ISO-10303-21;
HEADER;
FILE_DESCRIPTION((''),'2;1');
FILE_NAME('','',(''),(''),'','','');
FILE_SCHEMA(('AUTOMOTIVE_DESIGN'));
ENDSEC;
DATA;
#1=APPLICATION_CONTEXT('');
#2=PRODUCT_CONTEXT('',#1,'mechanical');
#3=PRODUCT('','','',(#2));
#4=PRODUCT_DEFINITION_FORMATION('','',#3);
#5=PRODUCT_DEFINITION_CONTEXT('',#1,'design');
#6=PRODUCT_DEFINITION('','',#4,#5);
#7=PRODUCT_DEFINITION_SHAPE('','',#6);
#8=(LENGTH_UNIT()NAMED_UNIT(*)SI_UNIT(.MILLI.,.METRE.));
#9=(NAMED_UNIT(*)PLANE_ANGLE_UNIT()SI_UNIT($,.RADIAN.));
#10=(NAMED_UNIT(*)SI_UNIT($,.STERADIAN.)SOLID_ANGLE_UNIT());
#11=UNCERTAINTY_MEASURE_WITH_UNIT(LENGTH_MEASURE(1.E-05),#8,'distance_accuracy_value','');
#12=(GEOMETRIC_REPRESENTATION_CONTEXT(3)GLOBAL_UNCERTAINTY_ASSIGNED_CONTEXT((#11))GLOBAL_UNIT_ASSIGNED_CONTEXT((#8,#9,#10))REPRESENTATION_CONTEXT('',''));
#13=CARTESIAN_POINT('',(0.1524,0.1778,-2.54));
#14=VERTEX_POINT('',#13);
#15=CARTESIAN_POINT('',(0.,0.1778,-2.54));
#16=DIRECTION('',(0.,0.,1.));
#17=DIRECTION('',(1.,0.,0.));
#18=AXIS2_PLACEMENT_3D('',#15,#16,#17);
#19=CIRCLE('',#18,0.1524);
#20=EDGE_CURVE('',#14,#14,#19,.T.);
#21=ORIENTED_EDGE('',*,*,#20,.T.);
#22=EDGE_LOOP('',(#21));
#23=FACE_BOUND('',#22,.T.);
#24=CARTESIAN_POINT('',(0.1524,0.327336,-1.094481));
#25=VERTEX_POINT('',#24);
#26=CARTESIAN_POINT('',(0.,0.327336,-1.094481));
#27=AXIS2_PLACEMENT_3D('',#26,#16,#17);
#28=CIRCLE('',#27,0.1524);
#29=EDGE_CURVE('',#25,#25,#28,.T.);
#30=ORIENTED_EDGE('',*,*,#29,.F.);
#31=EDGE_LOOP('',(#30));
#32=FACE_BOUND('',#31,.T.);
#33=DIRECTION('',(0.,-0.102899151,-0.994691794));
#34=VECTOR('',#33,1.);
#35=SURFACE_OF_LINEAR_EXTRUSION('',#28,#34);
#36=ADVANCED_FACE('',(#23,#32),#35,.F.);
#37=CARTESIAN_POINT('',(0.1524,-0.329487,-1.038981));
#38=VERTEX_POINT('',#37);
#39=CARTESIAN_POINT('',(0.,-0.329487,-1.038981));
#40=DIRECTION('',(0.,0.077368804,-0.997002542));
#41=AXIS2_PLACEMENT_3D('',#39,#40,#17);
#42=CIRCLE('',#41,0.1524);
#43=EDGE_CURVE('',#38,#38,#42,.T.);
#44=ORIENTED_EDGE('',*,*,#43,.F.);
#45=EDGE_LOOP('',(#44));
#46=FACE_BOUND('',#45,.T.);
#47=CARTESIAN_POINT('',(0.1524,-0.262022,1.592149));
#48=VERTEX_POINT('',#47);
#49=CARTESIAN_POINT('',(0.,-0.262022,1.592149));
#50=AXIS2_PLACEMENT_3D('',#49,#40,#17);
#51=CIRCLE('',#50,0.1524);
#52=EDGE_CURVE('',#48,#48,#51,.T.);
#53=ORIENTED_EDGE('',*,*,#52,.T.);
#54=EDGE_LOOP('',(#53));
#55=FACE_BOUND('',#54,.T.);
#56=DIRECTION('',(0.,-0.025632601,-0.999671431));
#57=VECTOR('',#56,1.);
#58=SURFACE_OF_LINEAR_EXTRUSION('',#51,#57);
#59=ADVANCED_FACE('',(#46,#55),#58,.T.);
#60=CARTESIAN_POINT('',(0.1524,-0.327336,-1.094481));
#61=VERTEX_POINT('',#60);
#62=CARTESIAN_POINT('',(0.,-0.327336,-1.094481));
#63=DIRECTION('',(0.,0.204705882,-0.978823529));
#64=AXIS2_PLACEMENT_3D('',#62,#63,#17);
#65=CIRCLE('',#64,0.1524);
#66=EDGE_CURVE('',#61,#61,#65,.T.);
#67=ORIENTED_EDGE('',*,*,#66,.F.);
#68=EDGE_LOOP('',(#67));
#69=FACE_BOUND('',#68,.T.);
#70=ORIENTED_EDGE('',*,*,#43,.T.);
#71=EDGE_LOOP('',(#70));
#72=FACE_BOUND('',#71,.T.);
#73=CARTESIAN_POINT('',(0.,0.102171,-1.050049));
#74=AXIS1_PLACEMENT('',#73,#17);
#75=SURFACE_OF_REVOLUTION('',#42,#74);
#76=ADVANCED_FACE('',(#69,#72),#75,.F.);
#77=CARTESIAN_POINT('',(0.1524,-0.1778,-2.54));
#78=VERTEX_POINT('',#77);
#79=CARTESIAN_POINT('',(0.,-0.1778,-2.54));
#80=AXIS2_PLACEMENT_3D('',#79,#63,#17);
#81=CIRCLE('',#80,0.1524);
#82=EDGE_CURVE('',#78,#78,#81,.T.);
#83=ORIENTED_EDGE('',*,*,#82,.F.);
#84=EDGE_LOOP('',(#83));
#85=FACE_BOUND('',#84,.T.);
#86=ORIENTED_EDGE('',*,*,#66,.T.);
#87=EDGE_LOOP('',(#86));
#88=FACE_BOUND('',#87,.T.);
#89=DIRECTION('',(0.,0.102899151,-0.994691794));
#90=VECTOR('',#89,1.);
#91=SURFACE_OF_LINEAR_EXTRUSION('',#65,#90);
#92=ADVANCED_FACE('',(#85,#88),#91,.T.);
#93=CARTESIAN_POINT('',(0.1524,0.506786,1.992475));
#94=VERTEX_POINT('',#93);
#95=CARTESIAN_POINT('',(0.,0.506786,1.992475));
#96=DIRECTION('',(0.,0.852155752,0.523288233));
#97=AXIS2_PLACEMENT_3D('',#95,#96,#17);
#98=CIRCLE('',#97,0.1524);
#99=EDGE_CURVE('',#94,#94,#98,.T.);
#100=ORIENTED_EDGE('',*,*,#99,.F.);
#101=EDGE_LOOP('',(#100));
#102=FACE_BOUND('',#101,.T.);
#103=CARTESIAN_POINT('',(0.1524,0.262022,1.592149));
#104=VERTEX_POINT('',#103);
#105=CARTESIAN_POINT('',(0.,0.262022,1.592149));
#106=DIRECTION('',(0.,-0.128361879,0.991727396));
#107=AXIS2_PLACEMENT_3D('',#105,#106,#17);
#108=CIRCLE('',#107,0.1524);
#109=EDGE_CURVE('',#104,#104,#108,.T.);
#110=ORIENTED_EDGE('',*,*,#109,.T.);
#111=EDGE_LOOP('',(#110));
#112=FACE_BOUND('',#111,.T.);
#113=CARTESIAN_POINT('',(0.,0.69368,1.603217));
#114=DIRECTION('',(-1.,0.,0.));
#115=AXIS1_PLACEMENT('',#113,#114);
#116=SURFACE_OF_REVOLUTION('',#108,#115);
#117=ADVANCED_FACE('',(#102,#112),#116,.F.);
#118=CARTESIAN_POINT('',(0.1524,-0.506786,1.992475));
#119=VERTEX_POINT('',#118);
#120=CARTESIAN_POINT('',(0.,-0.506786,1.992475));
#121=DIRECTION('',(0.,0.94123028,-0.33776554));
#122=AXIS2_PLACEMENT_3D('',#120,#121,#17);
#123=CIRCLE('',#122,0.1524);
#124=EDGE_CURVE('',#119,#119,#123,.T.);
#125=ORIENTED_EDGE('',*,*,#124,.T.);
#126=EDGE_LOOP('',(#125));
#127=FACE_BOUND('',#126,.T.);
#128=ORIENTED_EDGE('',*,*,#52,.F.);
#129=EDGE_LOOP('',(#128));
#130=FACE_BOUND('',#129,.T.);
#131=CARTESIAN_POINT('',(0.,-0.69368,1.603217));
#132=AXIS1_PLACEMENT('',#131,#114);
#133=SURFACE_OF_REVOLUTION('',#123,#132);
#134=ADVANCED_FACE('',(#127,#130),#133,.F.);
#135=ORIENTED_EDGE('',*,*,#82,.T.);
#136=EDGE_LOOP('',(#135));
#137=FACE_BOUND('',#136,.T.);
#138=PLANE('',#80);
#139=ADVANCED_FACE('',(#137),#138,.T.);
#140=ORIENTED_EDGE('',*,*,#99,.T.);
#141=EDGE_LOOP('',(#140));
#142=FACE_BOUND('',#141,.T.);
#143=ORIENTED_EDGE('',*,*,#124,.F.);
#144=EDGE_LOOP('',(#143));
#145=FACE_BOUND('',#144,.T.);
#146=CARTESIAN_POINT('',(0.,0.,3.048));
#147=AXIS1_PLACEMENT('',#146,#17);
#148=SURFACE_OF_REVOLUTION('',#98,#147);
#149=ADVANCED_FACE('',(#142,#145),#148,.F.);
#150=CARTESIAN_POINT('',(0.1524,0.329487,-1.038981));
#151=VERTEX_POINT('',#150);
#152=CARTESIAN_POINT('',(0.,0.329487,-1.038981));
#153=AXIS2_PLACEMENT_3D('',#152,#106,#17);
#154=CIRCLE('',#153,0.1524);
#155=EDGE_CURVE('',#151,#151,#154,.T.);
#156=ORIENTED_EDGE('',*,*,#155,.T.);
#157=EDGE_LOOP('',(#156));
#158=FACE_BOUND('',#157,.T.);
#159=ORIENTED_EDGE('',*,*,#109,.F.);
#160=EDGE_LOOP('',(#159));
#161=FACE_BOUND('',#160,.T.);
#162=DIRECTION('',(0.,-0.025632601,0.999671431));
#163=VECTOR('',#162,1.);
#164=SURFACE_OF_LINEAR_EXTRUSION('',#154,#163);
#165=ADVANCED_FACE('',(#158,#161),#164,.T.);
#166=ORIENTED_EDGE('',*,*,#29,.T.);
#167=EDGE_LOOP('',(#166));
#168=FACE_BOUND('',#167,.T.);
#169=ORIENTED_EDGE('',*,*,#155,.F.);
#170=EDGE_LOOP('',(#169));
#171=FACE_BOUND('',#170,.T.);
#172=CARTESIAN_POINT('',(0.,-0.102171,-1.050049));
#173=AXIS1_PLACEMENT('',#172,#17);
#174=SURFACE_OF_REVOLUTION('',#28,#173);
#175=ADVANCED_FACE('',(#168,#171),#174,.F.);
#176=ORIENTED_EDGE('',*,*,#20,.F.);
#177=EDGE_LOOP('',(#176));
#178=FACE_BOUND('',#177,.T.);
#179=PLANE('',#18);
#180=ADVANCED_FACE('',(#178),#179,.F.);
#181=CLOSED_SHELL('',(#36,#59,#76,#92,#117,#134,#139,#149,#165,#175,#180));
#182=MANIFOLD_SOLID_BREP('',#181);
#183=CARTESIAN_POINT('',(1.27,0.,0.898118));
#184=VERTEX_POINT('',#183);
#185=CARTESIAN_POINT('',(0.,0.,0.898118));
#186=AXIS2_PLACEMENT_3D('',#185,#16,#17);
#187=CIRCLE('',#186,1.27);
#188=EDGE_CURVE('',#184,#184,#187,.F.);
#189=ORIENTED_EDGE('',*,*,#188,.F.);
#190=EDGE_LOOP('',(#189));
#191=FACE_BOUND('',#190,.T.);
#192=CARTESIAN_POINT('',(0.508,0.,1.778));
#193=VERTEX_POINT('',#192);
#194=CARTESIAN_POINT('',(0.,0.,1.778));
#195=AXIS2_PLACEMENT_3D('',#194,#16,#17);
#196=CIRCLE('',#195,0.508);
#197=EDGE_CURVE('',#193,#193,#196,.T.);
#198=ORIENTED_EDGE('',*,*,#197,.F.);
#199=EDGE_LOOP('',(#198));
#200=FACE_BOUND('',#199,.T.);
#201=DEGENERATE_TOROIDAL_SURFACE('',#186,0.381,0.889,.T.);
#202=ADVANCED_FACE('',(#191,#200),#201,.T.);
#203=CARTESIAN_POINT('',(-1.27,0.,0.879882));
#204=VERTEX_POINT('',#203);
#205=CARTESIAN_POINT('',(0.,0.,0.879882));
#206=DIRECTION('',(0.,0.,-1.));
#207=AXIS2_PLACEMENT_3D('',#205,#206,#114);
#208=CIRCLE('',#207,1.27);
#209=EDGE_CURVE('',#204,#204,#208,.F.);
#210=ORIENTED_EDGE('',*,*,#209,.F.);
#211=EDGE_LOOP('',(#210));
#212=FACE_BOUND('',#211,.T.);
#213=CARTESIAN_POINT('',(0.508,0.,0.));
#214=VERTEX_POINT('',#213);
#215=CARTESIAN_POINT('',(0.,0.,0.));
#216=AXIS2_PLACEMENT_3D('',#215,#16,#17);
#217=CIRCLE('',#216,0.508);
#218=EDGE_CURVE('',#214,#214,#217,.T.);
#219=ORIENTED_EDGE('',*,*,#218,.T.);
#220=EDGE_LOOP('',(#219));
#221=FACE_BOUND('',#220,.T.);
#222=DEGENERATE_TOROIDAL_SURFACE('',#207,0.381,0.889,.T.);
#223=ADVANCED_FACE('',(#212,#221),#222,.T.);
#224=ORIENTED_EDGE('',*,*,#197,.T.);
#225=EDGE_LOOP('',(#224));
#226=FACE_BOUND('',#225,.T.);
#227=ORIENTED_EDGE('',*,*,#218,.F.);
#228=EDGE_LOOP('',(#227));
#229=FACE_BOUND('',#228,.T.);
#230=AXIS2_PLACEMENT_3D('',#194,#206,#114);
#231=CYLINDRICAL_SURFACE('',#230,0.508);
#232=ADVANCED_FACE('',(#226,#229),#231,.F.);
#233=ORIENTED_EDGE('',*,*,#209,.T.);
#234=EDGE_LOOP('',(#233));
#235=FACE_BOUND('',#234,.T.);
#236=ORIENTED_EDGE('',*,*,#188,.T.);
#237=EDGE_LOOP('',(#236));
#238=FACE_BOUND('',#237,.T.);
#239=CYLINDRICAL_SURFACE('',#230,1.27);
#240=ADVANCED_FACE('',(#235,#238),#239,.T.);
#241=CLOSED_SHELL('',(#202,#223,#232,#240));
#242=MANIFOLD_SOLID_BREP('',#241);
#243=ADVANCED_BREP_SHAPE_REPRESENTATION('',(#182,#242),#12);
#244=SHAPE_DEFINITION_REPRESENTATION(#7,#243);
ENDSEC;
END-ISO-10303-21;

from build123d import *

# Parameters (mm, degrees)
SKETCH1_R          = 1.27
SKETCH1_R_2        = 0.508
PLASTIC_RING_DEPTH = 1.778
WIRE_PROFILE_R     = 0.1524
FILLET_6_R         = 0.889


with BuildPart() as part:
    # Sketch1 → Plastic-Ring (new body)
    with BuildSketch(Plane.XY):
        Circle(SKETCH1_R)
        Circle(SKETCH1_R_2, mode=Mode.SUBTRACT)
    extrude(amount=PLASTIC_RING_DEPTH)

    # 圆角6
    # the kernel refuses this fillet: 0.889 mm, written as the material it takes off along each edge
    with BuildSketch(Plane(origin=(0, 0, 0), x_dir=(1, 0, 0), z_dir=(0, -1, 0))) as fillet_6_piece_1:
        with BuildLine():
            CenterArc((0.381, 0.87988181), FILLET_6_R, 278.213210702, 81.786789298)
            Line((0.508, 0), (0.51054, -0.017597636))
            ThreePointArc((0.51054, -0.017597636), (0.889, -0.01778), (1.27, -0.01778))
            Line((1.27, -0.01778), (1.28778, 0))
            Line((1.28778, 0), (1.28778, 0.87988181))
            Line((1.28778, 0.87988181), (1.27, 0.87988181))
        make_face()
    revolve(axis=Axis((0, 0, 0), (0, 0, 1)), mode=Mode.SUBTRACT)
    with BuildSketch(Plane(origin=(0, 0, 1.778), x_dir=(1, 0, 0), z_dir=(0, -1, 0))) as fillet_6_piece_2:
        with BuildLine():
            CenterArc((0.381, -0.87988181), FILLET_6_R, 0, 81.786789298)
            Line((0.508, 0), (0.51054, 0.017597636))
            ThreePointArc((0.51054, 0.017597636), (0.889, 0.01778), (1.27, 0.01778))
            Line((1.27, 0.01778), (1.28778, 0))
            Line((1.28778, 0), (1.28778, -0.87988181))
            Line((1.28778, -0.87988181), (1.27, -0.87988181))
        make_face()
    revolve(axis=Axis((0, 0, 1.778), (0, 0, 1)), mode=Mode.SUBTRACT)


with BuildPart() as body_2:
    # Sweep3: sweep along a path in wire-bend
    with BuildLine(Plane(origin=(0, 0, 0), x_dir=(0, 0, -1), z_dir=(1, 0, 0))) as sweep3_path:
        Line((2.54, 0.1778), (1.094480717, 0.327336478))
        ThreePointArc((1.094480717, 0.327336478), (1.06676532, 0.329304864), (1.038980707, 0.329486685))
        Line((1.038980707, 0.329486685), (-1.592148749, 0.262021827))
        ThreePointArc((-1.592148749, 0.262021827), (-1.828459816, 0.325282242), (-1.992475214, 0.506786372))
        ThreePointArc((-1.992475214, 0.506786372), (-4.218882146, 0), (-1.992475214, -0.506786372))
        ThreePointArc((-1.992475214, -0.506786372), (-1.828459816, -0.325282242), (-1.592148749, -0.262021827))
        Line((-1.592148749, -0.262021827), (1.038980707, -0.329486685))
        ThreePointArc((1.038980707, -0.329486685), (1.06676532, -0.329304864), (1.094480717, -0.327336478))
        Line((1.094480717, -0.327336478), (2.54, -0.1778))
    # wire-profile → Sweep3 (sweep)
    with BuildSketch(Plane.XY.offset(-2.54)):
        with Locations((0, 0.1778)):
            Circle(WIRE_PROFILE_R)
    sweep(path=sweep3_path.line)


solid = Compound([part.part, body_2.part])
